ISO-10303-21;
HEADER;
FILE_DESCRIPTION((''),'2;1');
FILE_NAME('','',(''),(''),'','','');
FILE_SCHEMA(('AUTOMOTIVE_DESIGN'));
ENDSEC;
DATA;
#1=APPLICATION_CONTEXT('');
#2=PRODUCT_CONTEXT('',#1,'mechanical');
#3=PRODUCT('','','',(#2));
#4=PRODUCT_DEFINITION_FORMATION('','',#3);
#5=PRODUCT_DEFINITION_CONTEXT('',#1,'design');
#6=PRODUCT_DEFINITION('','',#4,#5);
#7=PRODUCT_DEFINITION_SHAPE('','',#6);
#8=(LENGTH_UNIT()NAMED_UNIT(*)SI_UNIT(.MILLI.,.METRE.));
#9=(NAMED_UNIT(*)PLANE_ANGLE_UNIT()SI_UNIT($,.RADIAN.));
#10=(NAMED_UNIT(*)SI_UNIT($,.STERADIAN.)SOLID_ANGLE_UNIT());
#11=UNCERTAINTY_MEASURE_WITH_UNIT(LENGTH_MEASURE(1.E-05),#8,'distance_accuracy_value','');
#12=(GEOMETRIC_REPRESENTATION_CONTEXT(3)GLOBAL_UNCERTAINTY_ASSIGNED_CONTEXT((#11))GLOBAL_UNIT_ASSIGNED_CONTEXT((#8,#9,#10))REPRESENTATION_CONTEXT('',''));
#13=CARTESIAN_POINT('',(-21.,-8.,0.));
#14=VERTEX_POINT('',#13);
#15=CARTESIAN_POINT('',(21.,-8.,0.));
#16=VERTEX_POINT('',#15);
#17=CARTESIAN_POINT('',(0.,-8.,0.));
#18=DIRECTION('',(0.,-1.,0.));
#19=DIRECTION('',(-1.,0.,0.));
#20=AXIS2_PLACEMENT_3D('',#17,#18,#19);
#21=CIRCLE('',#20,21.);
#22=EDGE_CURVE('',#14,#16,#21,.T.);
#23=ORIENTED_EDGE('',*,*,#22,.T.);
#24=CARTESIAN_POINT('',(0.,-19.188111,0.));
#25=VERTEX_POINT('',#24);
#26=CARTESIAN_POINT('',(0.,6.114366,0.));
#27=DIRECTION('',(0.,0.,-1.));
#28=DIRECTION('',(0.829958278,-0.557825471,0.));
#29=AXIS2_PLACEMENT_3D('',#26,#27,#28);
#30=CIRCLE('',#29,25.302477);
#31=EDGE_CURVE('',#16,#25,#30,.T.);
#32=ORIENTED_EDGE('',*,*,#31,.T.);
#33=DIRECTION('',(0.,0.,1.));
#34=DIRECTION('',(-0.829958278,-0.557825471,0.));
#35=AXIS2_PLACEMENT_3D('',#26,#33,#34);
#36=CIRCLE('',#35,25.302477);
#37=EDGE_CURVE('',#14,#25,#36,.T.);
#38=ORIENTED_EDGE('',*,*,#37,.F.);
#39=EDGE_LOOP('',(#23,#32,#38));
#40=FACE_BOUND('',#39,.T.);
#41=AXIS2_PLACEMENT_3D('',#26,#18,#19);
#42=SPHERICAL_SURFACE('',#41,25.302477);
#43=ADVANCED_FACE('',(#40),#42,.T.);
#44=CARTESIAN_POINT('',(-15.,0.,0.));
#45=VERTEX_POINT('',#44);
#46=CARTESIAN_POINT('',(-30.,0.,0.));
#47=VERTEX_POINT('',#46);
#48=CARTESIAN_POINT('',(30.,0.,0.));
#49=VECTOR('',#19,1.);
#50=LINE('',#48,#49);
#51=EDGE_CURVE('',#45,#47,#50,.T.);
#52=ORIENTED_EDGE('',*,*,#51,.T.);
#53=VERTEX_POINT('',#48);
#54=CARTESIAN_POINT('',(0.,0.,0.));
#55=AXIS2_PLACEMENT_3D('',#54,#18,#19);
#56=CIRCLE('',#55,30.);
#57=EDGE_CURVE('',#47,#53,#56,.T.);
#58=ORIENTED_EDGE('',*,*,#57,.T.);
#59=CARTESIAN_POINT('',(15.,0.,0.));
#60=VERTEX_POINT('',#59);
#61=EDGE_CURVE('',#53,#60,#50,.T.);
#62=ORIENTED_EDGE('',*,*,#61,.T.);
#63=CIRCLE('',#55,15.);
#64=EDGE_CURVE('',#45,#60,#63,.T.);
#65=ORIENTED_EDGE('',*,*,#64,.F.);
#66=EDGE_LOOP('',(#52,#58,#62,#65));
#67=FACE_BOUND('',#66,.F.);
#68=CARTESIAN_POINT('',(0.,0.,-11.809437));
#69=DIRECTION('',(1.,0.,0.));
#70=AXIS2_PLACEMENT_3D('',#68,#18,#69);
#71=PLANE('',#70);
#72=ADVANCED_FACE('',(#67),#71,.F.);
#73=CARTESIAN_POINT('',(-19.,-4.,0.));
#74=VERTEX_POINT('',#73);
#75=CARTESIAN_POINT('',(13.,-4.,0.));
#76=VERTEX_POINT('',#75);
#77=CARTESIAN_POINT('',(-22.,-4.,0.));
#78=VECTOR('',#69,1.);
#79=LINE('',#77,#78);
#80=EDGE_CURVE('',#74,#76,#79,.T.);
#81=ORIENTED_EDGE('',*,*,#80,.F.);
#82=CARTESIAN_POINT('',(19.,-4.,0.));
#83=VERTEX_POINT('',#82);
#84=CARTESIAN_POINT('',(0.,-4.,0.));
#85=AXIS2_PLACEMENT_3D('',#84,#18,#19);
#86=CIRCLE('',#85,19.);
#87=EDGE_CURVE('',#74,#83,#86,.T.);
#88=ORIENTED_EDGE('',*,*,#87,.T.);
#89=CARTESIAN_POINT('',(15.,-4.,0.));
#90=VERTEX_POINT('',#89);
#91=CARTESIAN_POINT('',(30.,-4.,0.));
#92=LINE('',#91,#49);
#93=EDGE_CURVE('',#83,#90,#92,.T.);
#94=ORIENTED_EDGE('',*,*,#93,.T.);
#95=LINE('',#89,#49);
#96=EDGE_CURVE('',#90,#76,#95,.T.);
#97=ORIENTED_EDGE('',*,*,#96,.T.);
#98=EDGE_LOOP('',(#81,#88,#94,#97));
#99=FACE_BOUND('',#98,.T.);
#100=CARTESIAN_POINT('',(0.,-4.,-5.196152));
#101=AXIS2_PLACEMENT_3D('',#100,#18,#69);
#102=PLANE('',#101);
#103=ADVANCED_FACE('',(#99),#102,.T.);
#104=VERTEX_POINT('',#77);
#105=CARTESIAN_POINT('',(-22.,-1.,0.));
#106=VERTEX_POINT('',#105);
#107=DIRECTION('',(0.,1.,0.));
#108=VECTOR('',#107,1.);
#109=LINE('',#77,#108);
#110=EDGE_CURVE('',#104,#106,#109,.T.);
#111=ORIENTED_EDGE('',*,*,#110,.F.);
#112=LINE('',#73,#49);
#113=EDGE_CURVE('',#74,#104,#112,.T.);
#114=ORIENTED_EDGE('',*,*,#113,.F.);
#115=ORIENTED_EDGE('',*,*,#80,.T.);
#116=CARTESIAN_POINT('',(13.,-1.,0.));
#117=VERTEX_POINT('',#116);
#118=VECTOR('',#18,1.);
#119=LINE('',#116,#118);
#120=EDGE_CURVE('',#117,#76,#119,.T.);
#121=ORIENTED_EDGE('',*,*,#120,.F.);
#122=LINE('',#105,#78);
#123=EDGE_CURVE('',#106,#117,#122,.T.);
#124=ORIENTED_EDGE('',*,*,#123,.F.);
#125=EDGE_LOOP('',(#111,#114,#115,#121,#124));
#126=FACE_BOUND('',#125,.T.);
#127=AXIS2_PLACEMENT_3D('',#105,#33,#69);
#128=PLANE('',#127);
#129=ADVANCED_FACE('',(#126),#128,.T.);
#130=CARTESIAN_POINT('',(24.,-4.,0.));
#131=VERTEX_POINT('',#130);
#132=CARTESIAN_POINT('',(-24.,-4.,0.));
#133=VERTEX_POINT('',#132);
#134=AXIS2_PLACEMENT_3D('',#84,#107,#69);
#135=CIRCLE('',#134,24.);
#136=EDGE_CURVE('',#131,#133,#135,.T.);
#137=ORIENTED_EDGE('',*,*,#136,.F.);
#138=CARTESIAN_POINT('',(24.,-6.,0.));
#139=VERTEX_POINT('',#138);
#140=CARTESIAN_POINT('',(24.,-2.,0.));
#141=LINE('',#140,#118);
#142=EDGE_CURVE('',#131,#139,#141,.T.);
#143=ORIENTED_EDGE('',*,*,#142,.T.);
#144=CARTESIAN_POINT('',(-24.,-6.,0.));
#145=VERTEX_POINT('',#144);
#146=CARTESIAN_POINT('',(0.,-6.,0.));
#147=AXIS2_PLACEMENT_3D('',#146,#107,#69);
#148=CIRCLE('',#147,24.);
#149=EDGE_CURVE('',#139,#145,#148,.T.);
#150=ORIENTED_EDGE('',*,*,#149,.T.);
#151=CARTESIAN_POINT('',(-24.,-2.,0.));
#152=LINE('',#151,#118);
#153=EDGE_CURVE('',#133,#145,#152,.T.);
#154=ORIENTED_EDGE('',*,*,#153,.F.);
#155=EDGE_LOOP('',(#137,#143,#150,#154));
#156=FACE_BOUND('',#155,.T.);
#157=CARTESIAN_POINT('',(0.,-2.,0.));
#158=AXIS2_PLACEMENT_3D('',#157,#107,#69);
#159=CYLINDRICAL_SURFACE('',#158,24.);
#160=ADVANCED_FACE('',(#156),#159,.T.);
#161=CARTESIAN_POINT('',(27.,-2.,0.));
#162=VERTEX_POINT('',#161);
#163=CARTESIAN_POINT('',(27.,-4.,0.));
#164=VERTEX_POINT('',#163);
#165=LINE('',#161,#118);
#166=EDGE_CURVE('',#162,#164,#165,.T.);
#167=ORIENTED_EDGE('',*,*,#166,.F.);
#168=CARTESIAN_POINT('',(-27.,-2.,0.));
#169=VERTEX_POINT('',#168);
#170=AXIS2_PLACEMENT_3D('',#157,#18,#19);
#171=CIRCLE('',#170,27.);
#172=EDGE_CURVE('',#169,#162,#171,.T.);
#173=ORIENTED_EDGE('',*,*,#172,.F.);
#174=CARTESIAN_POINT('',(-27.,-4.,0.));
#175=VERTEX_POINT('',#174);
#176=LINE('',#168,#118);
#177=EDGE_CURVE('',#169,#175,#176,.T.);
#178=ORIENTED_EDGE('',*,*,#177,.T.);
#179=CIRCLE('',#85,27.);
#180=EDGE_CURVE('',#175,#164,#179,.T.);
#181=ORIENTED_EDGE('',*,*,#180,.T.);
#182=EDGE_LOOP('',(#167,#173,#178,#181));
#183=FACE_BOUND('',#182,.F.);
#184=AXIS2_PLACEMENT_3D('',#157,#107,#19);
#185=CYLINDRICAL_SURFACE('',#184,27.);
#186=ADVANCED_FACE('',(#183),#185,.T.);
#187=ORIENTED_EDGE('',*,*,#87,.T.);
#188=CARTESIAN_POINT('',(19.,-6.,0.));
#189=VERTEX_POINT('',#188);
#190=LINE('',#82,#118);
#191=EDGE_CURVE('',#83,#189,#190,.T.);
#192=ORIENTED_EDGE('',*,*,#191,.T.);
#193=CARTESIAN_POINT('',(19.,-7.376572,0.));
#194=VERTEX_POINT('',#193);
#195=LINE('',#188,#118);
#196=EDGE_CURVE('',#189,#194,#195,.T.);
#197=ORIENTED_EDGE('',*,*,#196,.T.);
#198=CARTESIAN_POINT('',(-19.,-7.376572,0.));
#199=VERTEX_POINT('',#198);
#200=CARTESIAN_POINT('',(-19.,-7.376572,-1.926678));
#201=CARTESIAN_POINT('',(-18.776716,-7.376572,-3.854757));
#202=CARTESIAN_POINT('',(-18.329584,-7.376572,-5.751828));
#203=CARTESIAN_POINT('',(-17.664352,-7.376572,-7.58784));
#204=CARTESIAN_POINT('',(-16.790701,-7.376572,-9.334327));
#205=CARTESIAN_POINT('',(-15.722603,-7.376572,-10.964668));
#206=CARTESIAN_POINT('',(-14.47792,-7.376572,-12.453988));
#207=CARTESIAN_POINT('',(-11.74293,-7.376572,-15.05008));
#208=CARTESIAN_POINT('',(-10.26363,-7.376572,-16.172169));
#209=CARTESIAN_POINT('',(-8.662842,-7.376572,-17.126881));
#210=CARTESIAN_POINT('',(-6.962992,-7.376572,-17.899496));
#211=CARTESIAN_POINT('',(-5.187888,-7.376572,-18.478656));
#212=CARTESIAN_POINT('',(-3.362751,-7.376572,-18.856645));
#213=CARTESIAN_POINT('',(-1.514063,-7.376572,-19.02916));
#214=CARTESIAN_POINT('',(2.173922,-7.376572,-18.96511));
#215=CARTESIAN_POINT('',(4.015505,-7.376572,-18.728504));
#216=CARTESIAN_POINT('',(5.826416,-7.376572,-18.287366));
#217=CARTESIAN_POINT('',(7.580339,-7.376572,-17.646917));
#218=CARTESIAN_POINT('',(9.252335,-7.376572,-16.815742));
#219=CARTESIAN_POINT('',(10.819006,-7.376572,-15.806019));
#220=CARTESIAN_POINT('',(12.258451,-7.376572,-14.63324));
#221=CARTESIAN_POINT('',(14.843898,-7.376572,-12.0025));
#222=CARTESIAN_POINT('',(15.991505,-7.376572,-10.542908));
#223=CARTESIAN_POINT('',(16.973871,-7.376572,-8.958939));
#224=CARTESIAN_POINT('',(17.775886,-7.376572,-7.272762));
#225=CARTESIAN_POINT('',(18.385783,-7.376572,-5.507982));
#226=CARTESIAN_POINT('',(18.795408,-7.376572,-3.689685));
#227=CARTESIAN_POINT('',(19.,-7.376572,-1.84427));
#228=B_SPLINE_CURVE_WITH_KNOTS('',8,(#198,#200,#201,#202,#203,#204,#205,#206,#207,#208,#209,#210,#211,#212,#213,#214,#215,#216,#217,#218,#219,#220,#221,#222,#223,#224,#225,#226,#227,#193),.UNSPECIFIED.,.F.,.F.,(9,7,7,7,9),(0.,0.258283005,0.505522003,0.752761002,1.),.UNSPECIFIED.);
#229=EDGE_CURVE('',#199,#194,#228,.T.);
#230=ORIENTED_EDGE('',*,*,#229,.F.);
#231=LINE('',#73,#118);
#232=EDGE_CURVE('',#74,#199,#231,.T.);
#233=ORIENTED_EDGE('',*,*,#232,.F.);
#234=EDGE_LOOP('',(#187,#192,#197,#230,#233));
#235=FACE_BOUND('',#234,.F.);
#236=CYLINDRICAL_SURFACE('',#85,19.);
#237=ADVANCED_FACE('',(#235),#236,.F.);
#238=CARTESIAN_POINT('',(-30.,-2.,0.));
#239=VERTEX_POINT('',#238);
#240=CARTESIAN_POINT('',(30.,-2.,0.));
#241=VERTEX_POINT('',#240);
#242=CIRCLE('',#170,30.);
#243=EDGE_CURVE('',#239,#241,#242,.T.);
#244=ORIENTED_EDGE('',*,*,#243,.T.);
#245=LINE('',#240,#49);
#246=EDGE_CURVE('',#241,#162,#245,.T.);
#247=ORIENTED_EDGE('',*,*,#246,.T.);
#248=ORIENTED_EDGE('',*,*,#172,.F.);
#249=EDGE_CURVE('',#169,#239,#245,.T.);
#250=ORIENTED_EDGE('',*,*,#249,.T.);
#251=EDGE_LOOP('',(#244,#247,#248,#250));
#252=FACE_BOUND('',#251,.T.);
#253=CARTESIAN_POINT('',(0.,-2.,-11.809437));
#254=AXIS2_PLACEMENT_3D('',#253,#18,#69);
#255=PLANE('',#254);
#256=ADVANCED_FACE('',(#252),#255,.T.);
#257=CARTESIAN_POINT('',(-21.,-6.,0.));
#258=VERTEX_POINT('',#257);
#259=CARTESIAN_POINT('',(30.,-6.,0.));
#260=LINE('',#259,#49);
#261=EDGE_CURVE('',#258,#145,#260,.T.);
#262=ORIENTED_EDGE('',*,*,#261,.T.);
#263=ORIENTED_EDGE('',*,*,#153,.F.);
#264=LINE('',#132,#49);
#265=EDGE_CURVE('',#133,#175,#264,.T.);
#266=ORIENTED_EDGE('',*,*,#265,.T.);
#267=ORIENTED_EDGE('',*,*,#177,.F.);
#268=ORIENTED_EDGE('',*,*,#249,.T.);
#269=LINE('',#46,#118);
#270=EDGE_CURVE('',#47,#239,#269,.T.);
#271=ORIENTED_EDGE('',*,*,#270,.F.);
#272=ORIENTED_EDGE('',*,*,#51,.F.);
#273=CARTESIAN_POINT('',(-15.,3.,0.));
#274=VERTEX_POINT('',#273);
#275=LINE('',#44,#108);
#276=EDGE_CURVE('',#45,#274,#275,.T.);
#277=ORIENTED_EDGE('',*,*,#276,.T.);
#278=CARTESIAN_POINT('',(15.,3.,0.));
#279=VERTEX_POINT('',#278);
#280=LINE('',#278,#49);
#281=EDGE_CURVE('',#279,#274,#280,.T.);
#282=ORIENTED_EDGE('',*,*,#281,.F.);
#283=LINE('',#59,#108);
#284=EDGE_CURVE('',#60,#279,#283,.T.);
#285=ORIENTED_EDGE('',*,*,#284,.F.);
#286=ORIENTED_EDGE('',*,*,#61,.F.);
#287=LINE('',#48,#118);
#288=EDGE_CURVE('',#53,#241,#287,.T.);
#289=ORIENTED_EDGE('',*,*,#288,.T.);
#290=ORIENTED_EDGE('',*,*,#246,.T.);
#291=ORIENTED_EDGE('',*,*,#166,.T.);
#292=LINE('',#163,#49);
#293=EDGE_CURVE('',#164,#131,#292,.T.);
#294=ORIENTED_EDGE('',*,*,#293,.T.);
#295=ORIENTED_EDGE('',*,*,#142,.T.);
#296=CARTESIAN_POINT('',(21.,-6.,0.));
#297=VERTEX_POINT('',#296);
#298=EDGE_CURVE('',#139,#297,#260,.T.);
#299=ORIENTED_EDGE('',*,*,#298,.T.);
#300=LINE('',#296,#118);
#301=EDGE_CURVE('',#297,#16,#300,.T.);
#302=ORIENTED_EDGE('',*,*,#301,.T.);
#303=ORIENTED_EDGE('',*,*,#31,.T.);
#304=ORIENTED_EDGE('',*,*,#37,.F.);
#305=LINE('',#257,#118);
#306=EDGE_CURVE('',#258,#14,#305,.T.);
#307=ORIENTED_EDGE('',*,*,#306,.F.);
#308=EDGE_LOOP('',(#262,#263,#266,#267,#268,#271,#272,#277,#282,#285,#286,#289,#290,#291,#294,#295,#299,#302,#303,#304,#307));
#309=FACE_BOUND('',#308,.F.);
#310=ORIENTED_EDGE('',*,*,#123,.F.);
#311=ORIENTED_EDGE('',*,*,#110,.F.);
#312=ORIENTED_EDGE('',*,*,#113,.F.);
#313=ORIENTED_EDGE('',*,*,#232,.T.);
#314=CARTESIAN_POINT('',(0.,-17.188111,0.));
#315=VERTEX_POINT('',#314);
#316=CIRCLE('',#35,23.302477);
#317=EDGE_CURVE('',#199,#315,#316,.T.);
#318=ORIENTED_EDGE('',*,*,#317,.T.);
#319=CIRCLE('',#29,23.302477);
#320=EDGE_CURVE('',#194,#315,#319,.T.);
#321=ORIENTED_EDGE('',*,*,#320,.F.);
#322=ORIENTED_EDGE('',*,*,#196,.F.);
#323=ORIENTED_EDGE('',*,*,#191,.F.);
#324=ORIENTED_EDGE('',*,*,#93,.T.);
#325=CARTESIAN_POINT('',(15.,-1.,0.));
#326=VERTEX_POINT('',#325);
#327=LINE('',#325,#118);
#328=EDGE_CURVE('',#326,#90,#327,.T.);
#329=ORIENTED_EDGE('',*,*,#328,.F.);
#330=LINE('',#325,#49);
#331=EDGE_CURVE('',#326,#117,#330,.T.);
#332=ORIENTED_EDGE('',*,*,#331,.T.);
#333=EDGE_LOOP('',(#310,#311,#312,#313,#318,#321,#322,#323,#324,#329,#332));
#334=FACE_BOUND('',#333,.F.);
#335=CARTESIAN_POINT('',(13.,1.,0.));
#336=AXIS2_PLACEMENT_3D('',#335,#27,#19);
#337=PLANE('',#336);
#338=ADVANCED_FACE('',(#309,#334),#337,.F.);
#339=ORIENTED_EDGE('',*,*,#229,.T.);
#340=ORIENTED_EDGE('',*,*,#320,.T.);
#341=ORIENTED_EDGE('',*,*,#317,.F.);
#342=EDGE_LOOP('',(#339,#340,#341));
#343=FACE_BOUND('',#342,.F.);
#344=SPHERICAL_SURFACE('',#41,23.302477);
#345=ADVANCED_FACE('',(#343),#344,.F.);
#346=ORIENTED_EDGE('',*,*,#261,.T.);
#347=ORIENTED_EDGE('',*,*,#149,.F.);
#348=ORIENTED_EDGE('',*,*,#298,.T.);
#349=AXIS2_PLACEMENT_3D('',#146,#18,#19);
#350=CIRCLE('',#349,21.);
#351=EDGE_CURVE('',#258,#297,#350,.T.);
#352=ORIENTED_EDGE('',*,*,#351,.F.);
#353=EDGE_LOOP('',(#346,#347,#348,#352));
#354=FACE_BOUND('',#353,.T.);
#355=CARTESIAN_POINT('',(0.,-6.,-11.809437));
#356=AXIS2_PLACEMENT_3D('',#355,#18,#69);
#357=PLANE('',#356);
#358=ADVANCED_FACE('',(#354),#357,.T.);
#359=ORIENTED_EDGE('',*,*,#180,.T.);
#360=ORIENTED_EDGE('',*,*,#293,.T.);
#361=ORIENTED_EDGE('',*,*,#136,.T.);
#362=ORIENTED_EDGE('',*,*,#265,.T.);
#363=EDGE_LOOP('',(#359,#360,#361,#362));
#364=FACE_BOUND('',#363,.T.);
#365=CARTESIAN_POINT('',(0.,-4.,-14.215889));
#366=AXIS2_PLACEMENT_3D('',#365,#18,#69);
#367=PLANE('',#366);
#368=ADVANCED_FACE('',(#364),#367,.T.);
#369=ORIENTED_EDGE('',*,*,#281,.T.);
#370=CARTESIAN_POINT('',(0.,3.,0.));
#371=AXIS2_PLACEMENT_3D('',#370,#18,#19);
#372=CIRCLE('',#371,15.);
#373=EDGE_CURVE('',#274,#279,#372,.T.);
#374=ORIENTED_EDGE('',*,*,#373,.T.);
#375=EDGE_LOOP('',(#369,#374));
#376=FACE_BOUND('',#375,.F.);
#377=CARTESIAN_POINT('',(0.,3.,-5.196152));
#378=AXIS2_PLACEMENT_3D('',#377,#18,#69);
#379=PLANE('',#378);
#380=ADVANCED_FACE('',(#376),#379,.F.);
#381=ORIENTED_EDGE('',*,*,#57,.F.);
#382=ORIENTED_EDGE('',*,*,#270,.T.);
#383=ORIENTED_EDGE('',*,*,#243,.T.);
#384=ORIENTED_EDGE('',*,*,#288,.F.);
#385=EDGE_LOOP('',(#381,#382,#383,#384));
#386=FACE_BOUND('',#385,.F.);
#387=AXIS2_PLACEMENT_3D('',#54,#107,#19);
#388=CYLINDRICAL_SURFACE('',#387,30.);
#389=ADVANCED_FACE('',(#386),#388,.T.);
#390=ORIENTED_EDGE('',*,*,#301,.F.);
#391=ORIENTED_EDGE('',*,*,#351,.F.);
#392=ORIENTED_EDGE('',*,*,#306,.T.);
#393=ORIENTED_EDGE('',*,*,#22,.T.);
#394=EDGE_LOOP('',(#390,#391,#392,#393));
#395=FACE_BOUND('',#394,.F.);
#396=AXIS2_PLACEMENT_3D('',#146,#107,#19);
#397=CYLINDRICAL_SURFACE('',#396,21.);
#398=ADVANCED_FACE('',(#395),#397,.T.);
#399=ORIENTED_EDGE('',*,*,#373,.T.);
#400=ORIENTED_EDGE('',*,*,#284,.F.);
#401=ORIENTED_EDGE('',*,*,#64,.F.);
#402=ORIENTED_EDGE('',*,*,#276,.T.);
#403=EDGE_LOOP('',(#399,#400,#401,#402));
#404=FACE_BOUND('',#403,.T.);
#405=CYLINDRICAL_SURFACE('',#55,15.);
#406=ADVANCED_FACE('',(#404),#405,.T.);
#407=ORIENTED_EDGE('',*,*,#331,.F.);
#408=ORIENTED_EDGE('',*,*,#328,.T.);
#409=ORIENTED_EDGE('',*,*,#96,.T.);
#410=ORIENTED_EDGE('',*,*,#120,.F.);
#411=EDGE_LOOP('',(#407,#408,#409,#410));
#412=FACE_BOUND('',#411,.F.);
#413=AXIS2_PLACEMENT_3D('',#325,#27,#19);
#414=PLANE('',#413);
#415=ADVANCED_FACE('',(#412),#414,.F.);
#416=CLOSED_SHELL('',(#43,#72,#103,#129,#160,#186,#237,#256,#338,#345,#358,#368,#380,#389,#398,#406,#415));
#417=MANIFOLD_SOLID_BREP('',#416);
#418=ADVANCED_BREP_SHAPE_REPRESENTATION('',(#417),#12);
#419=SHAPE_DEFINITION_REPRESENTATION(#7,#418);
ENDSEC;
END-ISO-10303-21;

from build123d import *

# Parameters (mm, degrees)
F1_DEPTH      = 3
F2_DEPTH      = 2
F4_DEPTH      = 2
F5_DEPTH      = 4
F7_DEPTH      = 2
F9_ANGLE      = 180
F10_T         = 2
F10_T4_ANGLE  = 180.000000001
F10_T6_ANGLE  = 180.000000001
F10_T8_ANGLE  = 180.000000001
F10_T10_ANGLE = 180.000000001
F11_DEPTH     = 3
F12_DEPTH     = 1
F13_DEPTH     = 3


# Not quite as in the source:
# - a shell that OpenCascade refuses in one call is made with other operations: the cavity is built on its own and cut out


with BuildPart() as f1:
    # F0 (on Front) → F1 (new body)
    with BuildSketch(Plane.XZ):
        with BuildLine():
            Line((15, 0), (-15, 0))
            ThreePointArc((-15, 0), (0, -15), (15, 0))
        make_face()
    extrude(amount=-F1_DEPTH)

    # F0 (on Front) → F2 (join)
    with BuildSketch(Plane.XZ):
        with BuildLine():
            ThreePointArc((15, 0), (0, -15), (-15, 0))
            Line((-15, 0), (-30, 0))
            ThreePointArc((-30, 0), (0, -30), (30, 0))
            Line((30, 0), (15, 0))
        make_face()
        with BuildLine():
            Line((15, 0), (-15, 0))
            ThreePointArc((-15, 0), (0, -15), (15, 0))
        make_face()
    extrude(amount=F2_DEPTH)

    # F3 (on face) → F4 (join)
    with BuildSketch(Plane.XZ.offset(2)):
        with BuildLine():
            ThreePointArc((-27, 0), (0, -27), (27, 0))
            Line((27, 0), (24, 0))
            ThreePointArc((24, 0), (0, -24), (-24, 0))
            Line((-24, 0), (-27, 0))
        make_face()
    extrude(amount=F4_DEPTH)

    # F5 (add): a face of the model
    f5_faces = [f1.faces().sort_by_distance(p)[0] for p in [
        (0, -2, -10.1859163579),
    ]]
    extrude(f5_faces, amount=F5_DEPTH)

    # F6 (on face) → F7 (join)
    with BuildSketch(Plane.XZ.offset(6)):
        with BuildLine():
            ThreePointArc((-21, 0), (0, -21), (21, 0))
            Line((21, 0), (-21, 0))
        make_face()
    extrude(amount=F7_DEPTH)

    # F8 (on face) → F9 (revolve)
    with BuildSketch(Plane.XY):
        with BuildLine():
            Line((0, -8), (-21, -8))
            ThreePointArc((-21, -8), (-11.8972036761, -16.2165961892), (0, -19.1881107091))
            Line((0, -19.1881107091), (0, -8))
        make_face()
    revolve(axis=Axis((0, 0.2930196971, 0), (0, -1, 0)), revolution_arc=F9_ANGLE)

    # F10: shell of thickness 2, made by hand


with BuildPart() as f10_core1:
    # F10_t2: copy of F1
    add(f1.part)

    # the walls: a layer under each face that stays
    f10_faces = [f10_core1.faces().sort_by_distance(p)[0] for p in [
        (0, -1, -30),
        (-20, 0, -15),
        (-25.7142857143, -2, -15),
        (0, -3, -27),
        (-23.1428571429, -4, -13.5),
        (0, -5, -24),
        (-20.5714285714, -6, -12),
        (0, -7, -21),
        (0, 1.5, -15),
        (0, 3, -7.5),
        (0, -16.2165961892, -11.8972036761),
    ]]
    thicken(f10_faces, amount=-F10_T, mode=Mode.SUBTRACT)

    # F10_s3 → F10_t4 (revolve, cut)
    with BuildSketch(Plane.XY):
        Polygon((-15.02, 0.02), (-15, -2), (-13, -2), (-13, 0), align=None)
    revolve(axis=Axis((0, 0, 0), (0, -1, 0)), revolution_arc=F10_T4_ANGLE, mode=Mode.SUBTRACT)

    # F10_s5 → F10_t6 (revolve, cut)
    with BuildSketch(Plane.XY):
        Polygon((-27.02, -2.02), (-27, 0), (-25, 0), (-25, -2), align=None)
    revolve(axis=Axis((0, -2, 0), (0, -1, 0)), revolution_arc=F10_T6_ANGLE, mode=Mode.SUBTRACT)

    # F10_s7 → F10_t8 (revolve, cut)
    with BuildSketch(Plane.XY):
        Polygon((24.02, -4.02), (24, -2), (22, -2), (22, -4), align=None)
    revolve(axis=Axis((0, -4, 0), (0, 1, 0)), revolution_arc=F10_T8_ANGLE, mode=Mode.SUBTRACT)

    # F10_s9 → F10_t10 (revolve, cut)
    with BuildSketch(Plane.XY):
        Polygon((-21.02, -6.02), (-21, -4), (-19, -4), (-19, -6), align=None)
    revolve(axis=Axis((0, -6, 0), (0, -1, 0)), revolution_arc=F10_T10_ANGLE, mode=Mode.SUBTRACT)


with BuildPart() as f1_1:
    add(f1.part)

    # what is left inside the walls is the cavity
    f10_cavity = [f10_core1.part.solids().sort_by_distance(p)[0] for p in [
        (0, -12.621798, -13.821356),
    ]]
    add(f10_cavity, mode=Mode.SUBTRACT)

    # F11 (add, through all): a face of the model
    f11_faces = [f1_1.faces().sort_by_distance(p)[0] for p in [
        (0, 1, -5.5173713605),
    ]]
    extrude(f11_faces, amount=F11_DEPTH)

    # F12 (cut): a face of the model
    f12_faces = [f1_1.faces().sort_by_distance(p)[0] for p in [
        (0, -2, -9.3370899946),
    ]]
    extrude(f12_faces, amount=-F12_DEPTH, mode=Mode.SUBTRACT)

    # F13 (add): a face of the model
    f13_faces = [f1_1.faces().sort_by_distance(p)[0] for p in [
        (0, -1, -9.3370899946),
    ]]
    extrude(f13_faces, amount=F13_DEPTH)


solid = f1_1.part
